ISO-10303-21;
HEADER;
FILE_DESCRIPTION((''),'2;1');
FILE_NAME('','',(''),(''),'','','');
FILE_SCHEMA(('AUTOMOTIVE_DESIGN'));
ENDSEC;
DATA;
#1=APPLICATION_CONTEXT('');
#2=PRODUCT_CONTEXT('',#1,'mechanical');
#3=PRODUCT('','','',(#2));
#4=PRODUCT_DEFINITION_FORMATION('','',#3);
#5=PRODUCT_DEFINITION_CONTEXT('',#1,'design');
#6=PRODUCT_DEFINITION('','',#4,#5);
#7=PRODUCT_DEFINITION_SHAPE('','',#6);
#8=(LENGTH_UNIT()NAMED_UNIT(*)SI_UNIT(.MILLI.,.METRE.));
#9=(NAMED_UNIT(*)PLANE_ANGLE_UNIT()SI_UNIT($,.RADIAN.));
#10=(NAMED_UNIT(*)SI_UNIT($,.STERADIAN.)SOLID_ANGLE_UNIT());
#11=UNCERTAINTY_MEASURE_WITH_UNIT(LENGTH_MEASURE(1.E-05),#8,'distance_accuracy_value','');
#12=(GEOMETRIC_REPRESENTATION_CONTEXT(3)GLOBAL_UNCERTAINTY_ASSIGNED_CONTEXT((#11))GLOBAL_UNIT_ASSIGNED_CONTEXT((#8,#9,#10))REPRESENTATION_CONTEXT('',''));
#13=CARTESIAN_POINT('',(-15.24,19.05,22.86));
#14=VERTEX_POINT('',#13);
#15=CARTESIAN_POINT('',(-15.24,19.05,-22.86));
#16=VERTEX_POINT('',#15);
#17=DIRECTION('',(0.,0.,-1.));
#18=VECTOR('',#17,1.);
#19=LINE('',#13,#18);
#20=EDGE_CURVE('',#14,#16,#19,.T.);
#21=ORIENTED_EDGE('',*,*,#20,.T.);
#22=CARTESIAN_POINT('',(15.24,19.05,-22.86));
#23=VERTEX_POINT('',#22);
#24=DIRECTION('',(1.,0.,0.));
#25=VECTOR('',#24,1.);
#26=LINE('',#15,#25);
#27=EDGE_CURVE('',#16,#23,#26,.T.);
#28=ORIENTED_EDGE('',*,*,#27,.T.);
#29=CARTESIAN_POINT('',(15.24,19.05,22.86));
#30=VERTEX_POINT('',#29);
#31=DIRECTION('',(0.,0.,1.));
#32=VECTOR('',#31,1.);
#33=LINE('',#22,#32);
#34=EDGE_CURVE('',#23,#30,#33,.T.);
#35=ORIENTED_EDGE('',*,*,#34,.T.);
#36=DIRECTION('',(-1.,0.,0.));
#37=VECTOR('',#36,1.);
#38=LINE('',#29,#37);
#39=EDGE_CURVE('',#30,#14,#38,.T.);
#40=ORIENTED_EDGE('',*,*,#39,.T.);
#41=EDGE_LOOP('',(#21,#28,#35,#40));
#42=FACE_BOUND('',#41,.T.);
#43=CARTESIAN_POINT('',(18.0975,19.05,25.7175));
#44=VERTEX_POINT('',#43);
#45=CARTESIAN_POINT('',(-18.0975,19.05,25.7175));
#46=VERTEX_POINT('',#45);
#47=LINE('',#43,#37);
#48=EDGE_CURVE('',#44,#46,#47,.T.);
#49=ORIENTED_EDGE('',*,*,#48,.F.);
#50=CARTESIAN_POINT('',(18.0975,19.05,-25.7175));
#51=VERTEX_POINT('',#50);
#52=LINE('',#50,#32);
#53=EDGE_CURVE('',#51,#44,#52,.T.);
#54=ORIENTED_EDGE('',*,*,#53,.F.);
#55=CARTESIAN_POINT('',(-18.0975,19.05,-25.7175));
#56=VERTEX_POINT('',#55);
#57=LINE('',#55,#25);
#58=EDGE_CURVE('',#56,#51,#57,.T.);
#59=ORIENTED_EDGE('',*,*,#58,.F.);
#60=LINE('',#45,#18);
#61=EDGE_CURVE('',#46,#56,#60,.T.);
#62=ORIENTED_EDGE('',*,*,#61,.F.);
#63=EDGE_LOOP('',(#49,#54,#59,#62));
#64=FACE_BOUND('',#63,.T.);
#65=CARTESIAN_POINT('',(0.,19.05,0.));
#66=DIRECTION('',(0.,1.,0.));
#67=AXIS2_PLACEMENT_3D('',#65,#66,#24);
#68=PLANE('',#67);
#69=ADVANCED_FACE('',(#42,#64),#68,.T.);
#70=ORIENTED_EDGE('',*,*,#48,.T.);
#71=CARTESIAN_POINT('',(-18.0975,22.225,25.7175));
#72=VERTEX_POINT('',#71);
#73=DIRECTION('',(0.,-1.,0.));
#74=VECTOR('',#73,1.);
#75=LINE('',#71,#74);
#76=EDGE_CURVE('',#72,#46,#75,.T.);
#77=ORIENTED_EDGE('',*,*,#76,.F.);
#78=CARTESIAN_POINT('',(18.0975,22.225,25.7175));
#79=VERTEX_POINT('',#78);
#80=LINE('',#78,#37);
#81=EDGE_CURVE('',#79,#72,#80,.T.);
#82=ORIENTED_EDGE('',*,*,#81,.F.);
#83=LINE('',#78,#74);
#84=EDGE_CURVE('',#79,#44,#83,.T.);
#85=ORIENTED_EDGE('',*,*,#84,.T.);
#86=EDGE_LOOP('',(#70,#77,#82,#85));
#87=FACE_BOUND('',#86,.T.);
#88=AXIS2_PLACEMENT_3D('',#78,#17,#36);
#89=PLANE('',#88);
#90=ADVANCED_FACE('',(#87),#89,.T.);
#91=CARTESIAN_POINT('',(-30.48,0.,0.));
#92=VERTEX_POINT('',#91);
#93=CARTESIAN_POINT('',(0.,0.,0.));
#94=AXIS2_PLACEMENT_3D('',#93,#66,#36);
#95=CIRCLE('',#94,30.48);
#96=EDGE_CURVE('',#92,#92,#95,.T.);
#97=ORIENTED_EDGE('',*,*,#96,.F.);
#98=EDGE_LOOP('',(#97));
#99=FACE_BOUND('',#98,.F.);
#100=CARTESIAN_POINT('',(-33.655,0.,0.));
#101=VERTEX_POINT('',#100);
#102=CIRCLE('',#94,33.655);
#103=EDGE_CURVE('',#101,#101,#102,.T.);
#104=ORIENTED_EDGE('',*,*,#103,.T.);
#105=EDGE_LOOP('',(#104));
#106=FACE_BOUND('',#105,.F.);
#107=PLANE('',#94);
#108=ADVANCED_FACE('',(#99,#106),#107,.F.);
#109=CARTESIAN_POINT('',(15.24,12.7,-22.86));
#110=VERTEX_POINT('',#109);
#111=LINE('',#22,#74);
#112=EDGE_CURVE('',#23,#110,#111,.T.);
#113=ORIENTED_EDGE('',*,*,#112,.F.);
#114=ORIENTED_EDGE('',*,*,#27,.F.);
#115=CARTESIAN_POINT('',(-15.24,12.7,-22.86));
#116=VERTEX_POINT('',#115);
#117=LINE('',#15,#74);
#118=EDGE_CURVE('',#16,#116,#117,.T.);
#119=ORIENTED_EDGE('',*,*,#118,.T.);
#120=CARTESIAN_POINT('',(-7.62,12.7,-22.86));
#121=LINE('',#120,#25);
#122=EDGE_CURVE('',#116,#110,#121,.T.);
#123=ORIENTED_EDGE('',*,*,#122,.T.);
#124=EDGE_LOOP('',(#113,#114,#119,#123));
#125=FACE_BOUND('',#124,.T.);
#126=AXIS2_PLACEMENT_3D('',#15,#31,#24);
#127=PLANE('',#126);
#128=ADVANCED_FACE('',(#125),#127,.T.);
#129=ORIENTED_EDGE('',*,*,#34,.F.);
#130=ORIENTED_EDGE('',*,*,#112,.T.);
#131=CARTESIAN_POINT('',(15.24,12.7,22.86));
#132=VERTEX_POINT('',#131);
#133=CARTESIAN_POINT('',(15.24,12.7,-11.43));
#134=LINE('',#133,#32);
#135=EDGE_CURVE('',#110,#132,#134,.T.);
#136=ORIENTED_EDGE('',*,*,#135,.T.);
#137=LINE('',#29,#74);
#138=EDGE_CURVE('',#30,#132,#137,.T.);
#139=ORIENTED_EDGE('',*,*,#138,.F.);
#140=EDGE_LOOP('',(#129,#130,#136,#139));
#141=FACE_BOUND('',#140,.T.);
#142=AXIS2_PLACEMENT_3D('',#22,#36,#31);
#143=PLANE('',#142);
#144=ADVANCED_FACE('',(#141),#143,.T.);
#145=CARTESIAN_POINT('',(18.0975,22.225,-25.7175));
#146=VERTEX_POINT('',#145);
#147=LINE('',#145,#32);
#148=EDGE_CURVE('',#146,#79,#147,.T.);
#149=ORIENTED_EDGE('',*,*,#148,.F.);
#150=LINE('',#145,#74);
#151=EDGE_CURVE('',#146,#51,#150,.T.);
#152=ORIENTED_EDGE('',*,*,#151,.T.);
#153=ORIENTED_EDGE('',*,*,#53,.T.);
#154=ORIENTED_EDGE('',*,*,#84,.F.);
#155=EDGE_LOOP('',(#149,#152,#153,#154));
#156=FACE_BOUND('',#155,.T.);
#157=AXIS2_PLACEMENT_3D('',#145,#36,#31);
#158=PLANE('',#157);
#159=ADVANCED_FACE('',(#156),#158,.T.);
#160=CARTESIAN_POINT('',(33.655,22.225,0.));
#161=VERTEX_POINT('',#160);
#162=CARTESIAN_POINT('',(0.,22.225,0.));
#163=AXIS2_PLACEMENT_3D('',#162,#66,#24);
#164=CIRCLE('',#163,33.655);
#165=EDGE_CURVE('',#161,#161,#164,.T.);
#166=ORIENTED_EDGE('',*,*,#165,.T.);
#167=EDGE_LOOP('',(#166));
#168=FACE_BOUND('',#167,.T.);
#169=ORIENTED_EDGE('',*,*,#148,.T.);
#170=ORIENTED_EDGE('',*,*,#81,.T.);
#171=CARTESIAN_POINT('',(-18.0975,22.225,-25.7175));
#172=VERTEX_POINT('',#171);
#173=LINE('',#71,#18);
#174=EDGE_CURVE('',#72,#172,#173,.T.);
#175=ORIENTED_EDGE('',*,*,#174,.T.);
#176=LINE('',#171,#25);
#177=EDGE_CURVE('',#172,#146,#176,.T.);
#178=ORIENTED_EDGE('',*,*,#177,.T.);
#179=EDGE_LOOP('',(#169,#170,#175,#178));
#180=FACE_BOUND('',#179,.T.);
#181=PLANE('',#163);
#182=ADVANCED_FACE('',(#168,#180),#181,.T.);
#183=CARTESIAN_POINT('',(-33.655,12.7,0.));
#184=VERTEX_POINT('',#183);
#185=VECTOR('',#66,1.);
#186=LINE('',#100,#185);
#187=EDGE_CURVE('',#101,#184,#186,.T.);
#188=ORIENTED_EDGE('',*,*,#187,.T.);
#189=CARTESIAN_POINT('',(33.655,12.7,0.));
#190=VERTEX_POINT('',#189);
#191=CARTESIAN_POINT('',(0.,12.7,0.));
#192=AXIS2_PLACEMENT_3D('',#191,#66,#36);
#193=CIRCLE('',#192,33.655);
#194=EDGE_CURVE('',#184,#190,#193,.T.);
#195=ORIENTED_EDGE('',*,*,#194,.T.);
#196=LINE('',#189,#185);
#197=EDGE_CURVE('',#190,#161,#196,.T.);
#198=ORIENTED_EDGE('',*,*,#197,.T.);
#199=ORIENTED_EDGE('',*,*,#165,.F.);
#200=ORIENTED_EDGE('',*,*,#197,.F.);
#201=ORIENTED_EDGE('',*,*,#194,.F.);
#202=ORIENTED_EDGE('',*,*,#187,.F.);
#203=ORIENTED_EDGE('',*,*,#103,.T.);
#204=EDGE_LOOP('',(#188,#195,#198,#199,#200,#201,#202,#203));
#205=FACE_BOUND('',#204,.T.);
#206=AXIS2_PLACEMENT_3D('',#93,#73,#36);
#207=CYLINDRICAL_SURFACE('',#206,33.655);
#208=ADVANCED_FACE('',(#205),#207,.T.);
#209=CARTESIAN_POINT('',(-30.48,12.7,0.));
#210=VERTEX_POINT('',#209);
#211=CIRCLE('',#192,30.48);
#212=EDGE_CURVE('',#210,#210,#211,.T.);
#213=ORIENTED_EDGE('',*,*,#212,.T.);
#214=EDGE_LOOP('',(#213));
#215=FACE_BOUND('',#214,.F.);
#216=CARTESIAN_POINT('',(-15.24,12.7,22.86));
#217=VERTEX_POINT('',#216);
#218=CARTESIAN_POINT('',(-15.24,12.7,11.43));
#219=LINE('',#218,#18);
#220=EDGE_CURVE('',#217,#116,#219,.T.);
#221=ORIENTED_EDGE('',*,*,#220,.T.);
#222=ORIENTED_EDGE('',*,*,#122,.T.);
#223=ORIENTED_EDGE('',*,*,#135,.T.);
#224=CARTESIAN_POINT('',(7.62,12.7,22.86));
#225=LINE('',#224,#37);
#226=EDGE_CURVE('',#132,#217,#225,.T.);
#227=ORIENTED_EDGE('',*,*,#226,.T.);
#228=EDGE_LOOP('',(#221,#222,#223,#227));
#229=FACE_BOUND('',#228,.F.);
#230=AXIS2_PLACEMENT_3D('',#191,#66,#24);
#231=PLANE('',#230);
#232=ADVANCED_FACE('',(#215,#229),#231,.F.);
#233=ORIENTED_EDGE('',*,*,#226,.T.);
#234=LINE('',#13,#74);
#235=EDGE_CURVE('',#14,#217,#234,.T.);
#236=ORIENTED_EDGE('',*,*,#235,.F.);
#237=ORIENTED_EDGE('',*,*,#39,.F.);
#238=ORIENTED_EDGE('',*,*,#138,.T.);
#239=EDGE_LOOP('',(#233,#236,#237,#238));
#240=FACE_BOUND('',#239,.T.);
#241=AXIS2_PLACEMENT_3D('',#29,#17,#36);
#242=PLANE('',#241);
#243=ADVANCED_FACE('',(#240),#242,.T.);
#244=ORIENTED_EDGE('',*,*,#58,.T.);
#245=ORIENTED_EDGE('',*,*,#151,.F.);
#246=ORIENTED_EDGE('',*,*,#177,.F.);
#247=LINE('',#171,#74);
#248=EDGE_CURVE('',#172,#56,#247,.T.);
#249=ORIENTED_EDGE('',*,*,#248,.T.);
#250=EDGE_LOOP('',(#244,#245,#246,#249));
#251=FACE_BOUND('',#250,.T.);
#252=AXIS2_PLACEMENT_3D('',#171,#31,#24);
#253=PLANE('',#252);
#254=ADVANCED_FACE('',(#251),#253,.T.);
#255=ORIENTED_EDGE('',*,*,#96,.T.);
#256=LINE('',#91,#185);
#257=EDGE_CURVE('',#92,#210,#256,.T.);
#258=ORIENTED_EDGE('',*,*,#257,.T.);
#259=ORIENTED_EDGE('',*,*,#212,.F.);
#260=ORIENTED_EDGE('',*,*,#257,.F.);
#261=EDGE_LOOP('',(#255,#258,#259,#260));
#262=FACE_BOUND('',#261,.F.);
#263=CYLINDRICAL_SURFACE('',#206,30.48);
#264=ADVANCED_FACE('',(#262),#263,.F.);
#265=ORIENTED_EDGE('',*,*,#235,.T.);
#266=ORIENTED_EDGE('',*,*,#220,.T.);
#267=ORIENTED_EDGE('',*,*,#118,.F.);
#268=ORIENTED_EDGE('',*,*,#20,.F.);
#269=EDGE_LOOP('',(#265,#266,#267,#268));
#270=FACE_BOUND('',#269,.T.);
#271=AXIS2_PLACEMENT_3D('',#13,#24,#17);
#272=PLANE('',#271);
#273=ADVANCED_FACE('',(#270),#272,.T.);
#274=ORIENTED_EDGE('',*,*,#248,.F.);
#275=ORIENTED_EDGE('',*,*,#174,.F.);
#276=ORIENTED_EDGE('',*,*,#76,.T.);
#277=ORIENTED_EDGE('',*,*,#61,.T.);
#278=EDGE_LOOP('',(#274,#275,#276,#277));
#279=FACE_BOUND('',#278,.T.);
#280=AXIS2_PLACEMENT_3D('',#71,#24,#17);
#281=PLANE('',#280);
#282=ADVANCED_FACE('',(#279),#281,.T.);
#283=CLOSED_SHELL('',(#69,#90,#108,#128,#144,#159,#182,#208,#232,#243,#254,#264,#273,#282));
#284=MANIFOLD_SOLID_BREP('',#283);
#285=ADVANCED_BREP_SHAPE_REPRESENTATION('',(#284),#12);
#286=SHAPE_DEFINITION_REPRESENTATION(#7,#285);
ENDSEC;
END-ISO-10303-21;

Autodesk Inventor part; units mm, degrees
ref_plane "YZ Plane" through (0, 0, 0) normal (1, 0, 0) x (0, 1, 0)
ref_plane "XZ Plane" through (0, 0, 0) normal (0, 1, 0) x (-1, 0, 0)
ref_plane "XY Plane" through (0, 0, 0) normal (0, 0, 1) x (1, 0, 0)
sketch "Sketch1" plane through (0, 0, 0) normal (0, 1, 0) x (-1, 0, 0)
  circle A0 centre (0, 0) radius 33.655
  circle A1 centre (0, 0) radius 30.48
  dimension "d0" = 67.31
  dimension "d1" = 60.96
extrude "Extrusion1" add sketch "Sketch1" along normal blind 12.7
sketch "Sketch2" plane through (0, 12.7, 0) normal (0, 1, 0) x (1, 0, 0)
  circle A0 centre (0, 0) radius 33.655
extrude "Extrusion2" add sketch "Sketch2" along normal blind 9.525
sketch "Sketch3" plane through (0, 22.225, 0) normal (0, 1, 0) x (1, 0, 0)
  line L0 (18.0975, -25.7175) -> (-18.0975, -25.7175)
  line L1 (-18.0975, -25.7175) -> (-18.0975, 25.7175)
  line L2 (-18.0975, 25.7175) -> (18.0975, 25.7175)
  line L3 (18.0975, 25.7175) -> (18.0975, -25.7175)
  line L4 (18.0975, -25.7175) -> (-18.0975, 25.7175) construction
  line L5 (-18.0975, -25.7175) -> (18.0975, 25.7175) construction
  point P0 (0, 0)
  dimension "d6" = 36.195
  dimension "d7" = 51.435
extrude "Extrusion3" cut sketch "Sketch3" against normal blind 3.175
sketch "Sketch4" plane through (0, 19.05, 0) normal (0, 1, 0) x (1, 0, 0)
  line L0 (15.24, -22.86) -> (-15.24, -22.86)
  line L1 (-15.24, -22.86) -> (-15.24, 22.86)
  line L2 (-15.24, 22.86) -> (15.24, 22.86)
  line L3 (15.24, 22.86) -> (15.24, -22.86)
  line L4 (15.24, -22.86) -> (-15.24, 22.86) construction
  line L5 (-15.24, -22.86) -> (15.24, 22.86) construction
  point P0 (0, 0)
  dimension "d10" = 30.48
  dimension "d11" = 45.72
extrude "Extrusion4" cut sketch "Sketch4" against normal through all
properties part number "Upper Collar"
